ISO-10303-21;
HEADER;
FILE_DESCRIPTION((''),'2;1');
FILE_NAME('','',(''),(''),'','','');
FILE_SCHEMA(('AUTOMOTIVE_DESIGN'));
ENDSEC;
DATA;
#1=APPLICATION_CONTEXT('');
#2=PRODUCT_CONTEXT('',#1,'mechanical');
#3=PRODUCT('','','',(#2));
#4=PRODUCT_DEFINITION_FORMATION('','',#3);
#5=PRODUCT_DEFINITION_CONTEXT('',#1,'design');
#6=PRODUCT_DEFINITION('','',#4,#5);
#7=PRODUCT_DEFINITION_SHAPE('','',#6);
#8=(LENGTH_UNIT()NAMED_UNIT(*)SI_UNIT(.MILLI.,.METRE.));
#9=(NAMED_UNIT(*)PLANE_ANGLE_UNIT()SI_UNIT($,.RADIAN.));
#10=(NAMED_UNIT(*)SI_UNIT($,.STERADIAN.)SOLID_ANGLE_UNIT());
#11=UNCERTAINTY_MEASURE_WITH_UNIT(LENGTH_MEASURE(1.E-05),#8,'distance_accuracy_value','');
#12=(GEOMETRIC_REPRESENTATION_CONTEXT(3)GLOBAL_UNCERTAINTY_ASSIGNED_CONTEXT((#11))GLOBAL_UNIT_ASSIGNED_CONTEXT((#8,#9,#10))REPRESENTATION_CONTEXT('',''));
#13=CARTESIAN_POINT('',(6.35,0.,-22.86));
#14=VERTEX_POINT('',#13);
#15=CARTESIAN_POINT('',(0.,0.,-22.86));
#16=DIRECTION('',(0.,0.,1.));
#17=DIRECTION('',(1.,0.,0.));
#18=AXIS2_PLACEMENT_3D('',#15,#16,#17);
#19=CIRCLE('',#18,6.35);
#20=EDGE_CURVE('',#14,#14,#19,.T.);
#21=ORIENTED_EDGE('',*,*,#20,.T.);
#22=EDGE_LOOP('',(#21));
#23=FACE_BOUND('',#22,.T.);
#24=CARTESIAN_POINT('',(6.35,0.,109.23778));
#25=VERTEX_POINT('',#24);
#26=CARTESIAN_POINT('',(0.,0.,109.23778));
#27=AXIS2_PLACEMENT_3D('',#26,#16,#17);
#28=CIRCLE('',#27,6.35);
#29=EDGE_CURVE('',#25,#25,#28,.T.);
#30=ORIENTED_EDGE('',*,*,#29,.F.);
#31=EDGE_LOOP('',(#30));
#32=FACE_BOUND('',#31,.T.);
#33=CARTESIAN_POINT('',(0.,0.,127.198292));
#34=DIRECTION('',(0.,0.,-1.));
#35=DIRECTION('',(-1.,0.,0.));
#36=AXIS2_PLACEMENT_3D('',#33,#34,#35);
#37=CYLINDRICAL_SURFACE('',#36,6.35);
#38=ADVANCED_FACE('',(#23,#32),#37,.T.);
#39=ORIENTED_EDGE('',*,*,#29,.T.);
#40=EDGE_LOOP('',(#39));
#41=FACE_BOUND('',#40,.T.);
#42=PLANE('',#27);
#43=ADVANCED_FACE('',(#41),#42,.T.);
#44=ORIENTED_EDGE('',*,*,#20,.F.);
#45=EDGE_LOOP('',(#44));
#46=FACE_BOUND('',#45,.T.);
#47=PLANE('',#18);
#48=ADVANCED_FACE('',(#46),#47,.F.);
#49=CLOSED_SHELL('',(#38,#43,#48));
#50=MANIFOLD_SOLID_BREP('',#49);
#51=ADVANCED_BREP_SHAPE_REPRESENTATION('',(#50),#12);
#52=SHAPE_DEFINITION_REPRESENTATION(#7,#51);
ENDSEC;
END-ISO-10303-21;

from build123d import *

# Parameters (mm, degrees)
BOSS_EXTRUDE1_OUTLINE_R = 6.35
BOSS_EXTRUDE1_DEPTH     = 132.09778


# Read off the part's stored shape, not the designer's step: Boss-Extrude1
with BuildPart() as part:
    # Boss-Extrude1 outline → Boss-Extrude1 (new body)
    with BuildSketch(Plane.XY.offset(-22.86)):
        Circle(BOSS_EXTRUDE1_OUTLINE_R)
    extrude(amount=BOSS_EXTRUDE1_DEPTH)


solid = part.part
